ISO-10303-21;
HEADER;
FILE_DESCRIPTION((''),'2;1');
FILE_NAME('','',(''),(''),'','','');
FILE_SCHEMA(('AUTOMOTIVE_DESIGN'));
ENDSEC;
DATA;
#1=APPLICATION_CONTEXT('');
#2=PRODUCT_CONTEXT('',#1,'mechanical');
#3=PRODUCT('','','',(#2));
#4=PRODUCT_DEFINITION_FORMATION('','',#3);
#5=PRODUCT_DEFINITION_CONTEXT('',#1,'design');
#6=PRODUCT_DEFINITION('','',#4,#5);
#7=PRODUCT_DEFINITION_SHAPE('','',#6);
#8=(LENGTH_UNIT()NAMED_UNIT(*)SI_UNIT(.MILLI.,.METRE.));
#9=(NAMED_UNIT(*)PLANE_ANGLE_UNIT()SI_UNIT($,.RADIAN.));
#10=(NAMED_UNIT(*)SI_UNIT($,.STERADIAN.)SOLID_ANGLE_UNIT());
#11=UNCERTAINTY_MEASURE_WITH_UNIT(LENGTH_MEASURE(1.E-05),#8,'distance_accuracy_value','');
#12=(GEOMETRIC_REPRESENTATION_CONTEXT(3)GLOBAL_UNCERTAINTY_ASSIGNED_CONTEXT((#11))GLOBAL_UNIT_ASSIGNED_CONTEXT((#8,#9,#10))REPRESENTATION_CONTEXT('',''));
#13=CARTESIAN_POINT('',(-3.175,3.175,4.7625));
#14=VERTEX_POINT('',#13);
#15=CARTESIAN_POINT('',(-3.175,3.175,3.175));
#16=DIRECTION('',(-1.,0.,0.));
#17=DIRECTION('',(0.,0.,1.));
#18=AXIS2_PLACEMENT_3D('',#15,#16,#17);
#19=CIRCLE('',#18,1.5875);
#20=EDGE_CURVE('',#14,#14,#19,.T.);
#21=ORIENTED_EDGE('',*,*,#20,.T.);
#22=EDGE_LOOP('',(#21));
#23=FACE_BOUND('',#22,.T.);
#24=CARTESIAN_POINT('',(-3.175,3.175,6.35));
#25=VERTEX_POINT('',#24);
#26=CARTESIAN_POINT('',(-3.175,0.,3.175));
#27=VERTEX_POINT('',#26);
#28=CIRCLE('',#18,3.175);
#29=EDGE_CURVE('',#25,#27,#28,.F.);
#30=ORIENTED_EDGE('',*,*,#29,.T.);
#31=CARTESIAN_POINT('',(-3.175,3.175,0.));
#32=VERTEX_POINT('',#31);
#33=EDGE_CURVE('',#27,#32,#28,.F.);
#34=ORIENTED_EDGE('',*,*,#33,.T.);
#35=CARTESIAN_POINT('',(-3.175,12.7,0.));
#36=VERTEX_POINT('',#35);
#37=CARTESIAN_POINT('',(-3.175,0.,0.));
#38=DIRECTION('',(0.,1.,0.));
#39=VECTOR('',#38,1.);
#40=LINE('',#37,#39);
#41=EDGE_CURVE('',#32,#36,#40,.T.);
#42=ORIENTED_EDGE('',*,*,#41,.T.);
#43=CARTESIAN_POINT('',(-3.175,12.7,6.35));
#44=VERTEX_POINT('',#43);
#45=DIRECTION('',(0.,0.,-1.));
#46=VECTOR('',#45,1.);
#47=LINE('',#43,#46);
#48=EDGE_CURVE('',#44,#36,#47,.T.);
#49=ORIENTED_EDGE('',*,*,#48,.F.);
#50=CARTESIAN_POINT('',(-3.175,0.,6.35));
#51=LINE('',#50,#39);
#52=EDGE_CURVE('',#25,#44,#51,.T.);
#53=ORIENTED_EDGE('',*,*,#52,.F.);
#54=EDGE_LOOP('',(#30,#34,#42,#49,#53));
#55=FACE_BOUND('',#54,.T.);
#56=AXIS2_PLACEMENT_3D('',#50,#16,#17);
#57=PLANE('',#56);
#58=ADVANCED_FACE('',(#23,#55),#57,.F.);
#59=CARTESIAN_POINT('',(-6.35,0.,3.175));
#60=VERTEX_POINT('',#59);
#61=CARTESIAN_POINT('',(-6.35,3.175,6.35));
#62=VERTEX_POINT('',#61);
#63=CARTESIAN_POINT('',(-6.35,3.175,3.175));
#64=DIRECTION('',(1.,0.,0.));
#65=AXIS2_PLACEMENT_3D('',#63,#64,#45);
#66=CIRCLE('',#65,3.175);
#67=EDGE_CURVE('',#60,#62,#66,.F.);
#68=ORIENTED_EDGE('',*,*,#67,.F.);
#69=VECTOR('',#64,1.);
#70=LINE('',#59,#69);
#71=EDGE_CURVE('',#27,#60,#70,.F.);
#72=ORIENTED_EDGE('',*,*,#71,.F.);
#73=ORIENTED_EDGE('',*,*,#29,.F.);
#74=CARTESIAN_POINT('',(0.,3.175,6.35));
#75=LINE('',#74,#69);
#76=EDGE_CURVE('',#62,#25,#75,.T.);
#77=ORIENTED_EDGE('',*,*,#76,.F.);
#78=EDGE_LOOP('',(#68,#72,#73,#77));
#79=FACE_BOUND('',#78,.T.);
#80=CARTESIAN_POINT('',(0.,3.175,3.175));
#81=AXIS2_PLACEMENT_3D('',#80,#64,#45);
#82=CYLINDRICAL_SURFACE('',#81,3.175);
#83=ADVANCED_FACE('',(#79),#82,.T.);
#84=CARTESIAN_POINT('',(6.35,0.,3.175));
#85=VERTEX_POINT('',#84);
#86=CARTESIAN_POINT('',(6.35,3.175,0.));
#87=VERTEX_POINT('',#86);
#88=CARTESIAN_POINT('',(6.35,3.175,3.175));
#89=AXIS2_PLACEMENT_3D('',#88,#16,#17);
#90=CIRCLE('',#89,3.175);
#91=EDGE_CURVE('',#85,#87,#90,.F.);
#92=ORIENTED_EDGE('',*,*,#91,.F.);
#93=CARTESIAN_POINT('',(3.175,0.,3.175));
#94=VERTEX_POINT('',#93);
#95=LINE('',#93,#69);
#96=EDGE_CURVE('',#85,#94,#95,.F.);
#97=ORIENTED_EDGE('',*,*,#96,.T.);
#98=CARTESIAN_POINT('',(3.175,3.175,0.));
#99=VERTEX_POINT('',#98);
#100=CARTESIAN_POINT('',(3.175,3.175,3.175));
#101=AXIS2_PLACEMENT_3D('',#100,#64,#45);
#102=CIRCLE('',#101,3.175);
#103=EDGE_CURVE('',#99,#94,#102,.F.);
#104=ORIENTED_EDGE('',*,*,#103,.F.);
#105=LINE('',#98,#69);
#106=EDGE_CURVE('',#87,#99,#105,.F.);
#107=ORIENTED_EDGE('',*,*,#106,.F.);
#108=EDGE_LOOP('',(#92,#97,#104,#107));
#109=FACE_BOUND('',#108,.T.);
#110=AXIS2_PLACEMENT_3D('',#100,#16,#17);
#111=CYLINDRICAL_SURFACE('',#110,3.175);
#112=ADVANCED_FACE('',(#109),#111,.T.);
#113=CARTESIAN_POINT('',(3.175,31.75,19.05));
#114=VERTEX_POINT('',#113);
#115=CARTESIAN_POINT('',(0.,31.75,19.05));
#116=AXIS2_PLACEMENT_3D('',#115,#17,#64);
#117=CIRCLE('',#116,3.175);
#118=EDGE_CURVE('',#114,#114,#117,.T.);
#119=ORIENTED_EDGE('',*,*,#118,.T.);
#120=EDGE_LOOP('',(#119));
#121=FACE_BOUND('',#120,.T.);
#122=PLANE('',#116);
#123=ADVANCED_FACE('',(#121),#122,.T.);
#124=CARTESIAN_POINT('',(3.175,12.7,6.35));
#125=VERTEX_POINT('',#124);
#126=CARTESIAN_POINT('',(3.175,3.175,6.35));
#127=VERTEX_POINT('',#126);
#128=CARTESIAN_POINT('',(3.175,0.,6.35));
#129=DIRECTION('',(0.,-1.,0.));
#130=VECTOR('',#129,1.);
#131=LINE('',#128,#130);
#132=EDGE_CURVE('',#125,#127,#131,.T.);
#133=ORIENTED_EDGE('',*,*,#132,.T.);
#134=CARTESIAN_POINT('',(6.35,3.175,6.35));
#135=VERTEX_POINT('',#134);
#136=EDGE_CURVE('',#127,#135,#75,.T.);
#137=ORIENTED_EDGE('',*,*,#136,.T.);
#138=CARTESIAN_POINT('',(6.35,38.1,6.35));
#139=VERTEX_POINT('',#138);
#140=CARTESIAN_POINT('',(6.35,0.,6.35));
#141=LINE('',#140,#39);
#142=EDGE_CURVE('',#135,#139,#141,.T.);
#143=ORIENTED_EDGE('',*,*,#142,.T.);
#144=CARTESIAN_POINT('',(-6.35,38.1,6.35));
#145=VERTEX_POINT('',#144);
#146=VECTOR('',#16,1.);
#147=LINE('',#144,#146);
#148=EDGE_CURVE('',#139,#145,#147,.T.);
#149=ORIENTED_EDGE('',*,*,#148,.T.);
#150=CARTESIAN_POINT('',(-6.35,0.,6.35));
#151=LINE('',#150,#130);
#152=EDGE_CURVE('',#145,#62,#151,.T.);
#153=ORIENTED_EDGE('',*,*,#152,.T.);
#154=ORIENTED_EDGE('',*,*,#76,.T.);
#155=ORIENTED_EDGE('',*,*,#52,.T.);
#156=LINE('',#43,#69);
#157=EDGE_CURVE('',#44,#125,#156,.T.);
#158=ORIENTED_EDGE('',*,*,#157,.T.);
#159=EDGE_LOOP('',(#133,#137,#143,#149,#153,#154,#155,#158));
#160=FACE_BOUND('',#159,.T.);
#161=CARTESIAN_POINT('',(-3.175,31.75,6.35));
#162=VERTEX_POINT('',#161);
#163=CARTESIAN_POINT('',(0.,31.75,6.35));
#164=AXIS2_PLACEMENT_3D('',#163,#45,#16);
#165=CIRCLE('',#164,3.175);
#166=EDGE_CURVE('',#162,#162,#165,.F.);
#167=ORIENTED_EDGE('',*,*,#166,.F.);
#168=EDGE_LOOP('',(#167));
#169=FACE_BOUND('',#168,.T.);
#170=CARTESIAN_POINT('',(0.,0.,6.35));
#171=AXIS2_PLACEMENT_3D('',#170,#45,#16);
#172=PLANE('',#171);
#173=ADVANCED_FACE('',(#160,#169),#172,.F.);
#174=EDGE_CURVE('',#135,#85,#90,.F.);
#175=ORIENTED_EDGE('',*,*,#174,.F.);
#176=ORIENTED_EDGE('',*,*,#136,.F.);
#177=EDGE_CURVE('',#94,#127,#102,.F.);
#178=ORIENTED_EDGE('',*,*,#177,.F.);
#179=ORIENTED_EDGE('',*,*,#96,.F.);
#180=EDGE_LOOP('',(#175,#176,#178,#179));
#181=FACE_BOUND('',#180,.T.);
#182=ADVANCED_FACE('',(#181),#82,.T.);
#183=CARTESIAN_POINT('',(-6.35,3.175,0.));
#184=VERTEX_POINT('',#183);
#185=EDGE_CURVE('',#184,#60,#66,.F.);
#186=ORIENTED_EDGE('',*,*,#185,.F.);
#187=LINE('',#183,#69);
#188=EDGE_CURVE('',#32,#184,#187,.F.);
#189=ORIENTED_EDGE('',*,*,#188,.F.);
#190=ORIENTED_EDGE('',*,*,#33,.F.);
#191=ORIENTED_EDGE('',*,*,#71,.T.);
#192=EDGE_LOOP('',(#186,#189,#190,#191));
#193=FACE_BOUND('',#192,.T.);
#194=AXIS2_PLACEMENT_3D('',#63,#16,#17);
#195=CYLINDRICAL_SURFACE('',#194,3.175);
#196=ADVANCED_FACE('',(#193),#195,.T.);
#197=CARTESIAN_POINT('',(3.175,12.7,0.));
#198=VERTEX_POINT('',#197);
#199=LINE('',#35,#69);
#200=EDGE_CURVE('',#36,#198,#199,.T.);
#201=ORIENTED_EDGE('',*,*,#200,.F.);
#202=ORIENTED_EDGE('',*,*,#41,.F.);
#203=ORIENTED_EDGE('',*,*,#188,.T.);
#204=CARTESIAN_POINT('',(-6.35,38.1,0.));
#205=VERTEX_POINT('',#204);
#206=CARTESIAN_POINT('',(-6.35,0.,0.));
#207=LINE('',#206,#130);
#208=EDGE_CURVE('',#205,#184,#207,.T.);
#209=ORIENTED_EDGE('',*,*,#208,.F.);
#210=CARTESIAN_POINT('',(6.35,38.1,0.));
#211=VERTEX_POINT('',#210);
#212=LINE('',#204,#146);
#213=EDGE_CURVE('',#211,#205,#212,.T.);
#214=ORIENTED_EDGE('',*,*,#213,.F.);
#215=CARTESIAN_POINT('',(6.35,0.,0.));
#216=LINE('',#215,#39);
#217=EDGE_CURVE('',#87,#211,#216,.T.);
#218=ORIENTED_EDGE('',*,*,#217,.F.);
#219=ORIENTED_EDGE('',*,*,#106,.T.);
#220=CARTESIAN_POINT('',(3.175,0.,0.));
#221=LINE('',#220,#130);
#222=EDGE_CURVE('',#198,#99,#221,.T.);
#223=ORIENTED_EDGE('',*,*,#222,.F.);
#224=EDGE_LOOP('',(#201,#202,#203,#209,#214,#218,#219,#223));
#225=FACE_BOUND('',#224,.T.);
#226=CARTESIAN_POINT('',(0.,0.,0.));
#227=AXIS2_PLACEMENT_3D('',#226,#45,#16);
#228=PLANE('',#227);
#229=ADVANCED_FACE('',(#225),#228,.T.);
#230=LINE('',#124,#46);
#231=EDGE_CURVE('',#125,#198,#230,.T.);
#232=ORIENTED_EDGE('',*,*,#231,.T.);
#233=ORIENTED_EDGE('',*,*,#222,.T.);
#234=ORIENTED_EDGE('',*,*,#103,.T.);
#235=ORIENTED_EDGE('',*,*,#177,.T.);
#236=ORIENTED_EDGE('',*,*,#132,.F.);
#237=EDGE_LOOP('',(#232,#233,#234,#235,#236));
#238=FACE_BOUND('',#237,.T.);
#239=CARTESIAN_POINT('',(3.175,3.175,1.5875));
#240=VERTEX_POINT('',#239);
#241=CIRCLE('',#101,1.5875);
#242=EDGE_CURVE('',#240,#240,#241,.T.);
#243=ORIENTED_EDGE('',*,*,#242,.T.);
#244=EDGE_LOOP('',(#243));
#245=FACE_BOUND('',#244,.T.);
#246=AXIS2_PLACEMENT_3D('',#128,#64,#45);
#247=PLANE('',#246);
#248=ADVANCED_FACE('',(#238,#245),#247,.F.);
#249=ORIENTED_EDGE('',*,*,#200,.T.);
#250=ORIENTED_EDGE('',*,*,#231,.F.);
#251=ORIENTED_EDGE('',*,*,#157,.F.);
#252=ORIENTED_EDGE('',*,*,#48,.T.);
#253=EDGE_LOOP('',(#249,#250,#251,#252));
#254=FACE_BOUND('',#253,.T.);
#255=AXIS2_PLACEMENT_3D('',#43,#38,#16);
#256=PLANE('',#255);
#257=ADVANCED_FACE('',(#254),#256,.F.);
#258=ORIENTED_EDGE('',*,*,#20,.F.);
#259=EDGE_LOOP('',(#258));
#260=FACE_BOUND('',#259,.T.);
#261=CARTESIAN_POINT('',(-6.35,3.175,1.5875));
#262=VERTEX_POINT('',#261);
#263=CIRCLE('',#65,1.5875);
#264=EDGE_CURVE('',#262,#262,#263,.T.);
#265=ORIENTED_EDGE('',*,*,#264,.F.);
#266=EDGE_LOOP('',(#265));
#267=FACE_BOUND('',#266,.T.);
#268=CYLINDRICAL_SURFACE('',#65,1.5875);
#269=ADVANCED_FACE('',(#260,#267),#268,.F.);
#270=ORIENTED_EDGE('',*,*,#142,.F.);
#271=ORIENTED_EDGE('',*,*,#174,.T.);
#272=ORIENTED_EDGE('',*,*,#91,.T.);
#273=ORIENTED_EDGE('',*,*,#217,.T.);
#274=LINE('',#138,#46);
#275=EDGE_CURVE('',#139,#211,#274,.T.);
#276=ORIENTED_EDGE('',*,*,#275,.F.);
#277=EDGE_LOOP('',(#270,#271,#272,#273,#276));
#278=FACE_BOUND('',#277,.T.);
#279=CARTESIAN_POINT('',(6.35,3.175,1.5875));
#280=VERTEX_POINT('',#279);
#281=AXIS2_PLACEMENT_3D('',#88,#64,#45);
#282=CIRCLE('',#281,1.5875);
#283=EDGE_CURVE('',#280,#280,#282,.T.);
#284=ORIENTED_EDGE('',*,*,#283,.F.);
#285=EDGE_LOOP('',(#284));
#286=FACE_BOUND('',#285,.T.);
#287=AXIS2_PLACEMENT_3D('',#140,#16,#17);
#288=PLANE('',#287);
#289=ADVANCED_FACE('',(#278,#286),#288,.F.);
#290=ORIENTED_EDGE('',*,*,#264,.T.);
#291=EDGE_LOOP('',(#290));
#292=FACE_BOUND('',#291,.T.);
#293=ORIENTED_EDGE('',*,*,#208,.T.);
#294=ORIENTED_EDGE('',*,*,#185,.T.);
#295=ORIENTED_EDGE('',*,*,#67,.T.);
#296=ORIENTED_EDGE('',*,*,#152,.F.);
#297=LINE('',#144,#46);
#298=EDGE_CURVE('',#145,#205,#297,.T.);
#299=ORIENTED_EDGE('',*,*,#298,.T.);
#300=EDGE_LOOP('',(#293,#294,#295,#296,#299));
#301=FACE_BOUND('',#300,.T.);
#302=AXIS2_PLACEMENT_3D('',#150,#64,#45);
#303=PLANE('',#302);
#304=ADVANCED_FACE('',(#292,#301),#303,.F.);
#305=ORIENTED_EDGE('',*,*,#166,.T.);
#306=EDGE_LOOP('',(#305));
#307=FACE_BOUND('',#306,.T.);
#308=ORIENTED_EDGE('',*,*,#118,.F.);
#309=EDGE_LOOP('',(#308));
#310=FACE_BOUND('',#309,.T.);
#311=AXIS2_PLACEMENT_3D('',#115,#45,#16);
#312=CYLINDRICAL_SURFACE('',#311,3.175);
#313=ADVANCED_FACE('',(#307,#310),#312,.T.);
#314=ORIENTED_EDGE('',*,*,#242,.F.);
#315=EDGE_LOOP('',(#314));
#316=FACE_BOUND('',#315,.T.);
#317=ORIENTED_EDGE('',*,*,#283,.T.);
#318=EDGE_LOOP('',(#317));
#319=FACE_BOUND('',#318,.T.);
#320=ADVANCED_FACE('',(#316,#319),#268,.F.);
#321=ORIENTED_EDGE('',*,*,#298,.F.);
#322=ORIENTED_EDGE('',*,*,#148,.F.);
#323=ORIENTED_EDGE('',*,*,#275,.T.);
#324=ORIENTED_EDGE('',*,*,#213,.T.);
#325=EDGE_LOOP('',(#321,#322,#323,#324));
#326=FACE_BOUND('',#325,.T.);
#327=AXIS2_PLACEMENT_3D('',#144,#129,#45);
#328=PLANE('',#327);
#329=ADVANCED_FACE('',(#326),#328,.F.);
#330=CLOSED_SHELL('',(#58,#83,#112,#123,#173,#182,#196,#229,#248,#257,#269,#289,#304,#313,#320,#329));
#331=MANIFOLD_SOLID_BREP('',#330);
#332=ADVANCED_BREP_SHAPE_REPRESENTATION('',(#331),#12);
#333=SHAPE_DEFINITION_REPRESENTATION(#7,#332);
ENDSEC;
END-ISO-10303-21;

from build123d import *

# Parameters (mm, degrees)
BOSS_EXTRUDE1_DEPTH     = 6.35
FILLET1_R               = 3.175
CUT_EXTRUDE1_DEPTH      = 40.144028919
CUT_EXTRUDE1_DEPTH_BACK = 40.144028919
SKETCH2_R               = 1.5875
SKETCH3_R               = 3.175
BOSS_EXTRUDE2_DEPTH     = 12.7


with BuildPart() as part:
    # Sketch1 → Boss-Extrude1 (new body)
    with BuildSketch(Plane.XY):
        Polygon((3.175, 0), (6.35, 0), (6.35, 38.1), (-6.35, 38.1), (-6.35, 0), (-3.175, 0), (-3.175, 12.7), (3.175, 12.7), align=None)
    extrude(amount=BOSS_EXTRUDE1_DEPTH)

    # Fillet1
    fillet1_edges = [part.edges().sort_by_distance(p)[0] for p in [
        (-4.7625, 0, 0),
        (-4.7625, 0, 6.35),
        (4.7625, 0, 0),
        (4.7625, 0, 6.35),
    ]]
    fillet(fillet1_edges, radius=FILLET1_R - 0.0001)  # a hair under: the kernel refuses the full size

    # Sketch2 → Cut-Extrude1 (cut, two sides: drawn at the far end of the back side and taken through both)
    with BuildSketch(Plane(origin=(0, 0, 0), x_dir=(0, 0, -1), z_dir=(1, 0, 0)).offset(-CUT_EXTRUDE1_DEPTH_BACK)):
        with Locations((-3.175, 3.175)):
            Circle(SKETCH2_R)
    extrude(amount=CUT_EXTRUDE1_DEPTH + CUT_EXTRUDE1_DEPTH_BACK, mode=Mode.SUBTRACT)

    # Sketch3 → Boss-Extrude2 (add)
    with BuildSketch(Plane.XY.offset(6.35)):
        with Locations(Location((0, 31.75, 0), (0, 0, 180))):
            Circle(SKETCH3_R)
    extrude(amount=BOSS_EXTRUDE2_DEPTH)


solid = part.part
